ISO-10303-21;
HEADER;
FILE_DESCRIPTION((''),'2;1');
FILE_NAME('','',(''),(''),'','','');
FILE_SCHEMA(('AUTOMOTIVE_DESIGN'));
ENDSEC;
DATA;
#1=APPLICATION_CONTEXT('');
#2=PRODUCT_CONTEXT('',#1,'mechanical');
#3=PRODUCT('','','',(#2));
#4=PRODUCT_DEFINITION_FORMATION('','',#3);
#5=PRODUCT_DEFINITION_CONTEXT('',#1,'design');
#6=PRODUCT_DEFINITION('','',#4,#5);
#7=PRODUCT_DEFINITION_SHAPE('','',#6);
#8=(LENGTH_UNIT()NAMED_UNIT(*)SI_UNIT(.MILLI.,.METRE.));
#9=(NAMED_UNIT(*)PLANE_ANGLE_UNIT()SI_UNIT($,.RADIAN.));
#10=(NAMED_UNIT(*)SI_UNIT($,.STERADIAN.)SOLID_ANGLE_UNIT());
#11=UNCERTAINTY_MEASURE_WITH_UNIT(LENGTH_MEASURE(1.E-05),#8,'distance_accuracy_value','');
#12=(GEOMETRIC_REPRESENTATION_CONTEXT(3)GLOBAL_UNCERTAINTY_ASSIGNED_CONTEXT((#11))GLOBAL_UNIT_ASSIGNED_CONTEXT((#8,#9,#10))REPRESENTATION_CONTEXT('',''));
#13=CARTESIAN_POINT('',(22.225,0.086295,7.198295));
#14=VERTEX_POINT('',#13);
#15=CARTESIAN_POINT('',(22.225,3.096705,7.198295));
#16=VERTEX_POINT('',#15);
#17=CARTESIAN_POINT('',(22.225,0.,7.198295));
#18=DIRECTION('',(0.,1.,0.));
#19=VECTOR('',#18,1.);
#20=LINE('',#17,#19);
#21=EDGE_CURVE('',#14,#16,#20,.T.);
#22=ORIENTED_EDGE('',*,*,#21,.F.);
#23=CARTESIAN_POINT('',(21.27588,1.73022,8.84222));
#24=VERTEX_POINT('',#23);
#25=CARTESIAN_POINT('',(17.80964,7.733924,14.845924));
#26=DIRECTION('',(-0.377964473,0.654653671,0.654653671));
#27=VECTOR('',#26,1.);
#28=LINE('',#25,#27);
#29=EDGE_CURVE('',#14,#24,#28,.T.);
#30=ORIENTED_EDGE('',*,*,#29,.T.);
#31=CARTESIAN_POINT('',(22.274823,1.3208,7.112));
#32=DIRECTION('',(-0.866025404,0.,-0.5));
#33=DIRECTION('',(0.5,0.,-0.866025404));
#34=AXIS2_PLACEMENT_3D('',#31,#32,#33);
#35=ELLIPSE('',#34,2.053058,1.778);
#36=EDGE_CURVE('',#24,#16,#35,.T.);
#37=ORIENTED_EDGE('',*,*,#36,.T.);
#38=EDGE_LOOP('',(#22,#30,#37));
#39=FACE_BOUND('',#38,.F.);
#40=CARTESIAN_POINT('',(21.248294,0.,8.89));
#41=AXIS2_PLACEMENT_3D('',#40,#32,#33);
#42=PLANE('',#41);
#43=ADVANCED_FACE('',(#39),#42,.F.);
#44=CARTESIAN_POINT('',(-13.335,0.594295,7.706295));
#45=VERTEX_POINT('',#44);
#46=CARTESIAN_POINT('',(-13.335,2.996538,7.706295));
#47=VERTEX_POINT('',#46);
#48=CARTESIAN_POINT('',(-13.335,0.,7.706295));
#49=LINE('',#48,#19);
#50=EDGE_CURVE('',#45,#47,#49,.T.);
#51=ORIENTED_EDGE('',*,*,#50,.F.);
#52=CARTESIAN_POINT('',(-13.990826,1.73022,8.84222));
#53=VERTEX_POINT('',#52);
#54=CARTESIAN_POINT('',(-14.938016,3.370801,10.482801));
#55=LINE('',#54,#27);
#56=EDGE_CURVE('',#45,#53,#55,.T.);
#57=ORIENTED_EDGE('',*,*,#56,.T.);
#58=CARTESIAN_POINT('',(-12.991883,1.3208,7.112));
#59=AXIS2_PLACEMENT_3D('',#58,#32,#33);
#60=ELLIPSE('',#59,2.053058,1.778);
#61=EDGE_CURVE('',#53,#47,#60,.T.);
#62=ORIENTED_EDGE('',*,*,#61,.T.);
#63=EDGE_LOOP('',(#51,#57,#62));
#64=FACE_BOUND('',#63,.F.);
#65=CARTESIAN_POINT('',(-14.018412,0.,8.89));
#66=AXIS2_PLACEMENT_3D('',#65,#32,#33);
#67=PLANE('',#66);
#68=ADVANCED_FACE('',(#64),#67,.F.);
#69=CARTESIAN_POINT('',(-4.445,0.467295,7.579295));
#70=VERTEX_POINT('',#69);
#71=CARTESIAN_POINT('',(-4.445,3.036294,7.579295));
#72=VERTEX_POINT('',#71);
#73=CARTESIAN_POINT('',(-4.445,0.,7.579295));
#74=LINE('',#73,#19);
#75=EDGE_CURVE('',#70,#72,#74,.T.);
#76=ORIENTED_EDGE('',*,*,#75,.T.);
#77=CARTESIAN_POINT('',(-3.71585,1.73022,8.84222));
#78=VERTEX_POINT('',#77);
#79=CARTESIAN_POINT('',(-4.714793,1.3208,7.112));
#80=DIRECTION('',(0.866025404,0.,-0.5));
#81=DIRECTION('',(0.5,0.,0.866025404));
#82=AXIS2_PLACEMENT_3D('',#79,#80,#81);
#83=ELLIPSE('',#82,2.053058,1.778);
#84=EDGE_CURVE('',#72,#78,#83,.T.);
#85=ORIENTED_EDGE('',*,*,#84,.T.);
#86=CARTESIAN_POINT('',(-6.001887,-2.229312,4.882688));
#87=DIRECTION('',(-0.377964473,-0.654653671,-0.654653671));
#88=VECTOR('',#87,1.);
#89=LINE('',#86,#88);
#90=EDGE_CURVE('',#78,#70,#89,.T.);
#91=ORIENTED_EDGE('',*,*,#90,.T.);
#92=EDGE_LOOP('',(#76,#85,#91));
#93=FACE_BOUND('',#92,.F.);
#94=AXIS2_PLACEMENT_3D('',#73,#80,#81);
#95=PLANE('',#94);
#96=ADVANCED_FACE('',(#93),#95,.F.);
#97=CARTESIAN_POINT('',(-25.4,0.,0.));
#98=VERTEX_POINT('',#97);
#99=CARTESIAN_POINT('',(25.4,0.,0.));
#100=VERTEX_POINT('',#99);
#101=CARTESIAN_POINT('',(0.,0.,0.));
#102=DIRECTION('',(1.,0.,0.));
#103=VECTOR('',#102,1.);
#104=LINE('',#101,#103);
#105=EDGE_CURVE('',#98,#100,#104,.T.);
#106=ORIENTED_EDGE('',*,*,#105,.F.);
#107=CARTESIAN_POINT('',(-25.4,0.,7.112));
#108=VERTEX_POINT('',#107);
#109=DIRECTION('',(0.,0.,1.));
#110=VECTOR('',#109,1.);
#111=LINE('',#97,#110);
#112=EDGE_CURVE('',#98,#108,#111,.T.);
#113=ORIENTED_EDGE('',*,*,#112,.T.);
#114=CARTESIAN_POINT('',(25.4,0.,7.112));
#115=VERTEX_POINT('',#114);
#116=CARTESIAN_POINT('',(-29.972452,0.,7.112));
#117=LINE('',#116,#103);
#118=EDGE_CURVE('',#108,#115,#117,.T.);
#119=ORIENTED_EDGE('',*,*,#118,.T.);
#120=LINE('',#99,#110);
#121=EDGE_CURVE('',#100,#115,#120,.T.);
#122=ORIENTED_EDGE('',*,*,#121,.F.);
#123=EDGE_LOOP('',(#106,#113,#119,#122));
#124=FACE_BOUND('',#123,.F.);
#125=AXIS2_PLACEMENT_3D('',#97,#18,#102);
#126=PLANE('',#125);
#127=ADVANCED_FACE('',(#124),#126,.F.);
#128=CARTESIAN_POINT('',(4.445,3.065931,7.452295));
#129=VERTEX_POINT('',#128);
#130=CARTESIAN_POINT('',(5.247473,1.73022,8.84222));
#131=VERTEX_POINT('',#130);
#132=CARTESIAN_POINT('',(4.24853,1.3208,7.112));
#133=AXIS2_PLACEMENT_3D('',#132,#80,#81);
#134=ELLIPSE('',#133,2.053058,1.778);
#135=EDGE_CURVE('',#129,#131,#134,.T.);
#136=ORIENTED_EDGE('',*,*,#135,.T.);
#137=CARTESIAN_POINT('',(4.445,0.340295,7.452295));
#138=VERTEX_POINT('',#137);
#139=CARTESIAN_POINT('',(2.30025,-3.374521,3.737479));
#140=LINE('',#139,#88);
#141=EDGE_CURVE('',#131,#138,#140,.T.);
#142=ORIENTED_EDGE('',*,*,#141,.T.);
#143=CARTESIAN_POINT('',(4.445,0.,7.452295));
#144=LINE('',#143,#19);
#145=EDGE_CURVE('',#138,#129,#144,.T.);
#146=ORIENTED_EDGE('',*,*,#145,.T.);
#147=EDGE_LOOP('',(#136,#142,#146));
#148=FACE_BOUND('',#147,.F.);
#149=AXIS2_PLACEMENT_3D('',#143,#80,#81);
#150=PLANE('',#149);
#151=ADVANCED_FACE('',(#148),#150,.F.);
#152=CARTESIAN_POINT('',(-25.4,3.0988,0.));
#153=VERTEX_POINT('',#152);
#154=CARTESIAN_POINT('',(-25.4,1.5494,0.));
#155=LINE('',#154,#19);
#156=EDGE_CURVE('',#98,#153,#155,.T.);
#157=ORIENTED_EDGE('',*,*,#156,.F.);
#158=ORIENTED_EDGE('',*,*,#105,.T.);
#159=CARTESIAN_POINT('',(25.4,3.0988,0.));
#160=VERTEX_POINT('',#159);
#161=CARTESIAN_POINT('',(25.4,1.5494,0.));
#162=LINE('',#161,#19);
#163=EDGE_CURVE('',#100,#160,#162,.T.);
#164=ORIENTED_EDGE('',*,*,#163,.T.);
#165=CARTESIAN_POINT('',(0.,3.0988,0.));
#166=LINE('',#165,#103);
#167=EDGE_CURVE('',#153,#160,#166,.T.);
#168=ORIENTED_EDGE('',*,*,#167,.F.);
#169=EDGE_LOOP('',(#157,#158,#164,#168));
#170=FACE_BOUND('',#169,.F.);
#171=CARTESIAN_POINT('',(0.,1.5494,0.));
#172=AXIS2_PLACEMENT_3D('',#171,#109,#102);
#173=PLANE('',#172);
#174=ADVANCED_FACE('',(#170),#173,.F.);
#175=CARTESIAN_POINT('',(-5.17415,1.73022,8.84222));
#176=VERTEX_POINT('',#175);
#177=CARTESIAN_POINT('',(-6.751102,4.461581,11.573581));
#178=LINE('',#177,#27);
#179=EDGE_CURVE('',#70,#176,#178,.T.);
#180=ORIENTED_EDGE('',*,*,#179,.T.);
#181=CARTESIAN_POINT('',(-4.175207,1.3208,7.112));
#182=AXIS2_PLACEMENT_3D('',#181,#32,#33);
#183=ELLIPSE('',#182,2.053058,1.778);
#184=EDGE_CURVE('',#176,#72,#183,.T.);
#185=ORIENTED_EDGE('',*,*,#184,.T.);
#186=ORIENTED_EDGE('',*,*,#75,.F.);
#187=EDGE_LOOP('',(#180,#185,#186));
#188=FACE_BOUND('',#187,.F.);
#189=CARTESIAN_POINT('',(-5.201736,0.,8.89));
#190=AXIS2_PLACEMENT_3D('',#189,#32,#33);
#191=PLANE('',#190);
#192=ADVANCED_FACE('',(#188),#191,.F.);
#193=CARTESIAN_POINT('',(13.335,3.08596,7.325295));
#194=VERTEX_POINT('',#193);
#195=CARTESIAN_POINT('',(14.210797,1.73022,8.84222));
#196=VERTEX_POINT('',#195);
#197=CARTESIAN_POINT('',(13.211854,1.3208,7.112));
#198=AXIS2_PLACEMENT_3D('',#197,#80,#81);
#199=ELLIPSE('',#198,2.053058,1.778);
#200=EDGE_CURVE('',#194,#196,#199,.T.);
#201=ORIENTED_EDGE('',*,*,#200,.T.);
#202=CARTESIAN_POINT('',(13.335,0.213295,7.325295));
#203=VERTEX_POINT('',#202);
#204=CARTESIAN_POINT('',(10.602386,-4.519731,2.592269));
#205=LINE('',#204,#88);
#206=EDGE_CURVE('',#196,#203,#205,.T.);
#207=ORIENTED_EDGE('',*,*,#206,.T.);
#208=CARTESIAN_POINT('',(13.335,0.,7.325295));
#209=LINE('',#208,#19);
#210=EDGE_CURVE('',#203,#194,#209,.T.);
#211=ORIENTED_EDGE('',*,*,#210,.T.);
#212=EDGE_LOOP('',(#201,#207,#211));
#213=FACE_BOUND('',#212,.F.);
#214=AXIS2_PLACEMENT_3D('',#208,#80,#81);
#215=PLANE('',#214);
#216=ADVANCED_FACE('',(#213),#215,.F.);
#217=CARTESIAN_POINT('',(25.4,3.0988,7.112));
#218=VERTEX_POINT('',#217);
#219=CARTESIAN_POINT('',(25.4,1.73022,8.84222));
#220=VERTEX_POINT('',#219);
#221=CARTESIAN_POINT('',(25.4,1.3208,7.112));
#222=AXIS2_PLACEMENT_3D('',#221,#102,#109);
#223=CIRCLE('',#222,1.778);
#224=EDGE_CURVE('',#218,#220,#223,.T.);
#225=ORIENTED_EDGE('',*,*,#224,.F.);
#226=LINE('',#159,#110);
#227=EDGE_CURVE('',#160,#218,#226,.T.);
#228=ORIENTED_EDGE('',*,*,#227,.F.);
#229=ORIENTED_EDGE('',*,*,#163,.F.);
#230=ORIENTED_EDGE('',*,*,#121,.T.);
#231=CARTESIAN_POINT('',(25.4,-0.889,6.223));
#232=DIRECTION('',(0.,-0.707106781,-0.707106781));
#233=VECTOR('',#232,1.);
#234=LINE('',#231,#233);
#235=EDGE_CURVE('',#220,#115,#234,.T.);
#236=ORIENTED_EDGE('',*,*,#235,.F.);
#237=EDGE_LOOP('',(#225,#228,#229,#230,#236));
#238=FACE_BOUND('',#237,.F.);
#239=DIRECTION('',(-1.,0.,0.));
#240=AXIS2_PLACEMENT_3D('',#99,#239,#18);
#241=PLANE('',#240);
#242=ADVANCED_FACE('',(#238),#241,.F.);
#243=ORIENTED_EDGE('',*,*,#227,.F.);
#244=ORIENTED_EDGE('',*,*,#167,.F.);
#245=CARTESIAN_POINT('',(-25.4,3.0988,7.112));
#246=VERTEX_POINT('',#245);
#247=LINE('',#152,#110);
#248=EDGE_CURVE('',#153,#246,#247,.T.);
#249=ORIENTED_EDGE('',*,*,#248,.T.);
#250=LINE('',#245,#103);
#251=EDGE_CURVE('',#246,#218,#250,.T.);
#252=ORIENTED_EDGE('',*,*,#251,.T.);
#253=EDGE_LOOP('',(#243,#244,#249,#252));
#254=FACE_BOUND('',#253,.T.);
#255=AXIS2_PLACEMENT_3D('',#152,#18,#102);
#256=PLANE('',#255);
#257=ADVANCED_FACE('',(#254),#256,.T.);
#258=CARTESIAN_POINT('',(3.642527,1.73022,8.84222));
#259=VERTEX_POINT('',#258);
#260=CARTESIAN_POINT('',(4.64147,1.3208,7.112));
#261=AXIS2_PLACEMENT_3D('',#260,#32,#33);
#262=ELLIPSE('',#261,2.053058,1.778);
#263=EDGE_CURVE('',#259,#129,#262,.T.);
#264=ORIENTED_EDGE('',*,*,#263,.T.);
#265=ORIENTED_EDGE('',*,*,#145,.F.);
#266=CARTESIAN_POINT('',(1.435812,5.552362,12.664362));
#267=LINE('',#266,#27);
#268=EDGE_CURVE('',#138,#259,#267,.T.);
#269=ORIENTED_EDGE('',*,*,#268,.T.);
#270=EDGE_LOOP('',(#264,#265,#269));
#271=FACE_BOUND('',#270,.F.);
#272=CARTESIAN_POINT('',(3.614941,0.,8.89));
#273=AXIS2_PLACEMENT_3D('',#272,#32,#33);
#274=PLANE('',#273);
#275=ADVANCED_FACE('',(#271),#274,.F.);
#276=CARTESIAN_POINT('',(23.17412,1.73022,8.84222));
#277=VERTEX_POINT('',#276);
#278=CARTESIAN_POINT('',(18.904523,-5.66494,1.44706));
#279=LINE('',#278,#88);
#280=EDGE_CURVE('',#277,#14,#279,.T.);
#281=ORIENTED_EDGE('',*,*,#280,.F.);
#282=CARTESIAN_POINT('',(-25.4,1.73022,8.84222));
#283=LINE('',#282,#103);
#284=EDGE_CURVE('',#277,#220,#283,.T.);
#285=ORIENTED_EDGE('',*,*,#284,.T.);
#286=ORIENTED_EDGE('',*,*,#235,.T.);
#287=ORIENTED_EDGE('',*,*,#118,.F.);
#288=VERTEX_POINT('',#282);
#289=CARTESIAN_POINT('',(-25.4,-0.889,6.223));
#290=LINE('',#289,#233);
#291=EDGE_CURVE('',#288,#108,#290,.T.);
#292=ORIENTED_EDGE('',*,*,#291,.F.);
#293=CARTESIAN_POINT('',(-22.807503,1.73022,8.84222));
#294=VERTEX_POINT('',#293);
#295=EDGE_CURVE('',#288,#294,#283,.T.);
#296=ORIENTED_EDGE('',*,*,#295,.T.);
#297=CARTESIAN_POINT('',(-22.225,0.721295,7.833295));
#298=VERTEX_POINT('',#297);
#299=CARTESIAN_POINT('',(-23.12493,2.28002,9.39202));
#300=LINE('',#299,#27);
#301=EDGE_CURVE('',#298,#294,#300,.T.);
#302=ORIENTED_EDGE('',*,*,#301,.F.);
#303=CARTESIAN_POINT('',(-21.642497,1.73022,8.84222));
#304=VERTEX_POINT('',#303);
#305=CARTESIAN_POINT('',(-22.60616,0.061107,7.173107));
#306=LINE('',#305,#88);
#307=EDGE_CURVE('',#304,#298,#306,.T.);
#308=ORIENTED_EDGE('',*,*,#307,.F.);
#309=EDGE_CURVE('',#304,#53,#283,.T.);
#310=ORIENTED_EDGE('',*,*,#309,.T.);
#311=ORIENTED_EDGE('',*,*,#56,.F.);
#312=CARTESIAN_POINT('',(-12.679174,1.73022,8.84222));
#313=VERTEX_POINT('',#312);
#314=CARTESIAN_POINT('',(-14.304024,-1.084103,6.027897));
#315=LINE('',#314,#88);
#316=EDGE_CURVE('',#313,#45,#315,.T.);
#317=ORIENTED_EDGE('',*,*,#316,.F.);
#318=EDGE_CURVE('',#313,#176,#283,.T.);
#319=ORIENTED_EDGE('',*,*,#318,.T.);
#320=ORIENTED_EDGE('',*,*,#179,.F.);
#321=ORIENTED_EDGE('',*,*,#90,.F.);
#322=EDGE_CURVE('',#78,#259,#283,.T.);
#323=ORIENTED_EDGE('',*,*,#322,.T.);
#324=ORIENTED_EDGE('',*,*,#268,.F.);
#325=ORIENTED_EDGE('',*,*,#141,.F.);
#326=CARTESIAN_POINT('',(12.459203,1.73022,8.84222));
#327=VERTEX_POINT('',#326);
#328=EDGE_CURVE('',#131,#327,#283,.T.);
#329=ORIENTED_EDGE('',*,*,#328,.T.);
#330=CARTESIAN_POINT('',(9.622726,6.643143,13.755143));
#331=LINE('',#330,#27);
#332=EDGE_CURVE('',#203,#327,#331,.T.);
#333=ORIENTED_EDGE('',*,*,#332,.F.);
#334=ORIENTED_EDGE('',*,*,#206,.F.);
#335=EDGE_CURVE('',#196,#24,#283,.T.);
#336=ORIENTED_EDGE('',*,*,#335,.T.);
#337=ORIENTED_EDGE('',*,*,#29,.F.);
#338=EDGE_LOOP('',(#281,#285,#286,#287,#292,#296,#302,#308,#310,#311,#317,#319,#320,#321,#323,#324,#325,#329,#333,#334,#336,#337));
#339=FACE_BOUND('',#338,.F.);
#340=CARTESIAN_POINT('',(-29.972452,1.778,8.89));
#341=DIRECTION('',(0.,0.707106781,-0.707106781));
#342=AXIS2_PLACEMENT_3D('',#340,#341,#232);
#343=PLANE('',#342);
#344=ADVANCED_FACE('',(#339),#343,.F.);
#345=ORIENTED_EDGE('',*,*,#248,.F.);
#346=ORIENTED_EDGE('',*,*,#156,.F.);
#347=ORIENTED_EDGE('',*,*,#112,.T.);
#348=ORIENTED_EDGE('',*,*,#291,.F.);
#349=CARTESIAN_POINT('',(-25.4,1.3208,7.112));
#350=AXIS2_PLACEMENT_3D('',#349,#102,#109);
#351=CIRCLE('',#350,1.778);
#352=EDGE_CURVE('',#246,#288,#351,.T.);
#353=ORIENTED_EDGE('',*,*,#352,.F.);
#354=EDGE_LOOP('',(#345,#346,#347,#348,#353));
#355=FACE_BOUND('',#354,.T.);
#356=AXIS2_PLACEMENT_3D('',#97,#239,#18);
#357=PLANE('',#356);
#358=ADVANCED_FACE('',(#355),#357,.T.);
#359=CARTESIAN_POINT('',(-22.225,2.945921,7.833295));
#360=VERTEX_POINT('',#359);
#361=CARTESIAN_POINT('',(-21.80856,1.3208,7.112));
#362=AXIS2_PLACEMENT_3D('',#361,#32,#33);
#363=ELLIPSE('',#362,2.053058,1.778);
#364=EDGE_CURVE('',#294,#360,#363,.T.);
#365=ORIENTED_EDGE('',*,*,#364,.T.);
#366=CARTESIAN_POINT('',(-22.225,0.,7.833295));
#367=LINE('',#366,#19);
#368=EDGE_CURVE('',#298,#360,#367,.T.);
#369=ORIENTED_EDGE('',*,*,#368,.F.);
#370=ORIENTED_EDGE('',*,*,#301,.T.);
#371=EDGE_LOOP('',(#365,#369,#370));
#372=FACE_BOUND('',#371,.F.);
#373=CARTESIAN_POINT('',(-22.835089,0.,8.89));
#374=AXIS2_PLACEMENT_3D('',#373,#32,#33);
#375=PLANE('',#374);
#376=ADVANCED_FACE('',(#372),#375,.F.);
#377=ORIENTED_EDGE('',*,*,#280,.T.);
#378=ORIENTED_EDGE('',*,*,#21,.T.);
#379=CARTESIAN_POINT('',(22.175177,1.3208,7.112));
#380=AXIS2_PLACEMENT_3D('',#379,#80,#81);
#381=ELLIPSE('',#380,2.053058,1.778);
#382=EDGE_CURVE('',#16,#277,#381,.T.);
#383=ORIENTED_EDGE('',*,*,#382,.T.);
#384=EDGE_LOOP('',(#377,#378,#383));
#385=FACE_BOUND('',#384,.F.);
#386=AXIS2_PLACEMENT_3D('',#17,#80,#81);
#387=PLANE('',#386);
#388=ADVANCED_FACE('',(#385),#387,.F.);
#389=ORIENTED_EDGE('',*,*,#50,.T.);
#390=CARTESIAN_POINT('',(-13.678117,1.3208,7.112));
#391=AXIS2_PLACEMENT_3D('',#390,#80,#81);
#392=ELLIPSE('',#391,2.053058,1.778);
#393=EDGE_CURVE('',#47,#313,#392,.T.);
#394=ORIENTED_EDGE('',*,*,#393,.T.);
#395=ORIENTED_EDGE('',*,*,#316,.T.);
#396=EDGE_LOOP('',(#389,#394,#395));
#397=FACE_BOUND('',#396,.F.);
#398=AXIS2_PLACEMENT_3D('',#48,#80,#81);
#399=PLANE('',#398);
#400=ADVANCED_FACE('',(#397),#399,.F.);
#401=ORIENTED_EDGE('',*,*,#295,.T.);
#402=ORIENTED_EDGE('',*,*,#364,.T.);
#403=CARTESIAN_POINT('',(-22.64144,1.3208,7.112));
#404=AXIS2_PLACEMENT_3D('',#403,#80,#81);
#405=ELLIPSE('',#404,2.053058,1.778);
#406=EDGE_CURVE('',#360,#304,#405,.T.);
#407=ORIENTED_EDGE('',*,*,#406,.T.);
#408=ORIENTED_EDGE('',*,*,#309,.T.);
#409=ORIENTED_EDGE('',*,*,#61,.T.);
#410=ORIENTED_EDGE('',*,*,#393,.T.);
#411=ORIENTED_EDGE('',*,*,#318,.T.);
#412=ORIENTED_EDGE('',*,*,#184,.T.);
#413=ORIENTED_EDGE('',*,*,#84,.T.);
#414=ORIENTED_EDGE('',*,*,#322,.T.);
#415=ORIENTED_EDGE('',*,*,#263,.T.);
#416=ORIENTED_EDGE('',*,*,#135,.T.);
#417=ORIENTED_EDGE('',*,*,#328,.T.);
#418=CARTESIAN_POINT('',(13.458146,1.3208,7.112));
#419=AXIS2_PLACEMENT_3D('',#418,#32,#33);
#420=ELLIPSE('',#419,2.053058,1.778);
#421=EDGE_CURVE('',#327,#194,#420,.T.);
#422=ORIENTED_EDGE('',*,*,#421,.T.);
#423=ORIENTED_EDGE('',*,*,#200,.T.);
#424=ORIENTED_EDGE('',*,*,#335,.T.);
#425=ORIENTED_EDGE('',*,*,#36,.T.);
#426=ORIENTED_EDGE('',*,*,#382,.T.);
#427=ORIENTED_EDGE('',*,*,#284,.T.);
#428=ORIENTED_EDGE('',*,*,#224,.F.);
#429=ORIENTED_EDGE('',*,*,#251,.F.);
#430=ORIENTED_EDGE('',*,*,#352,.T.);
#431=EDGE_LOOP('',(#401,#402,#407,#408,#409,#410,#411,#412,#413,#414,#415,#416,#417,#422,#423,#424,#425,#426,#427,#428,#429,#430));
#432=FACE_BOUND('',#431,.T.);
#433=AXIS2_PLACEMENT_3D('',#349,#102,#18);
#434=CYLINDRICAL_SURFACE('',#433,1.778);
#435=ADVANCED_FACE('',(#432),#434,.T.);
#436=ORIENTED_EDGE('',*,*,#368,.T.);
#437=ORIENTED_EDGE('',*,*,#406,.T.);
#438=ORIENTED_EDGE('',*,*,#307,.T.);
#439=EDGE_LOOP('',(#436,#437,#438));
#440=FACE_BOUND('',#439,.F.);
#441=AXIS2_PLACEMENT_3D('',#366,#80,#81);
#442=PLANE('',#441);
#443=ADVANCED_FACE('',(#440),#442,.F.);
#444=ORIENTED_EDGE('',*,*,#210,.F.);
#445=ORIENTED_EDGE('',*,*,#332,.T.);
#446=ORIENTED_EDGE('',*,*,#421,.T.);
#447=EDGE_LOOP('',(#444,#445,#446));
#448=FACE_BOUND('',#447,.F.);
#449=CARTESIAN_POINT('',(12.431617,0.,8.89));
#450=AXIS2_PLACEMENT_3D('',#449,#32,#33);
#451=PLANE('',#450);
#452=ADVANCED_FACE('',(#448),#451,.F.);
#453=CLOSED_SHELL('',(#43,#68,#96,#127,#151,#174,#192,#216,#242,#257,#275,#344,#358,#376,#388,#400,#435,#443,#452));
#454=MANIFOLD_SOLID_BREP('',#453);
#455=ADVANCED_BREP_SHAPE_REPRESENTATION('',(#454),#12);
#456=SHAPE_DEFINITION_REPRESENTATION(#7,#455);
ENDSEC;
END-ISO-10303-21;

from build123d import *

# Parameters (mm, degrees)
F0_W        = 50.8
F0_H        = 3.0988
F1_DEPTH    = 8.89
F3_R        = 1.778
F4_T1_DEPTH = 59.9449047052
F5_DEPTH    = 25.4


# Not quite as in the source:
# - a fillet or chamfer that OpenCascade refuses, or shapes differently, is made with other operations: its cross-section is extruded or revolved along the edge and cut away or added


with BuildPart() as f1:
    # F0 (on Top) → F1 (new body)
    with BuildSketch(Plane.XY):
        with Locations((0, 1.5494)):
            Rectangle(F0_W, F0_H)
    extrude(amount=F1_DEPTH)

    # F3
    f3_edges = [f1.edges().sort_by_distance(p)[0] for p in [
        (0, 3.0988, 8.89),
    ]]
    fillet(f3_edges, radius=F3_R)

    # F4: chamfer of 1.778 on 1 edges, made by hand

    # F4_s2 → F4_t1 (cut)
    with BuildSketch(Plane.YZ.offset(-29.9724523526)):
        Polygon((1.778, 8.89), (0, 7.112), (0, 8.89), align=None)
    extrude(amount=F4_T1_DEPTH, mode=Mode.SUBTRACT)

    # F2 (on face) → F5 (cut)
    with BuildSketch(Plane.XZ):
        Polygon((-22.225, 7.8332954744), (-21.6149113577, 8.89), (-22.8350886423, 8.89), align=None)
        Polygon((-12.6515878735, 8.89), (-14.0184121265, 8.89), (-13.335, 7.7062954744), align=None)
        Polygon((14.2383825791, 8.89), (12.4316174209, 8.89), (13.335, 7.3252954744), align=None)
        Polygon((22.225, 7.1982954744), (23.2017060633, 8.89), (21.2482939367, 8.89), align=None)
        Polygon((-3.6882643893, 8.89), (-5.2017356107, 8.89), (-4.445, 7.5792954744), align=None)
        Polygon((5.2750590949, 8.89), (3.6149409051, 8.89), (4.445, 7.4522954744), align=None)
    extrude(amount=-F5_DEPTH, mode=Mode.SUBTRACT)


solid = f1.part
